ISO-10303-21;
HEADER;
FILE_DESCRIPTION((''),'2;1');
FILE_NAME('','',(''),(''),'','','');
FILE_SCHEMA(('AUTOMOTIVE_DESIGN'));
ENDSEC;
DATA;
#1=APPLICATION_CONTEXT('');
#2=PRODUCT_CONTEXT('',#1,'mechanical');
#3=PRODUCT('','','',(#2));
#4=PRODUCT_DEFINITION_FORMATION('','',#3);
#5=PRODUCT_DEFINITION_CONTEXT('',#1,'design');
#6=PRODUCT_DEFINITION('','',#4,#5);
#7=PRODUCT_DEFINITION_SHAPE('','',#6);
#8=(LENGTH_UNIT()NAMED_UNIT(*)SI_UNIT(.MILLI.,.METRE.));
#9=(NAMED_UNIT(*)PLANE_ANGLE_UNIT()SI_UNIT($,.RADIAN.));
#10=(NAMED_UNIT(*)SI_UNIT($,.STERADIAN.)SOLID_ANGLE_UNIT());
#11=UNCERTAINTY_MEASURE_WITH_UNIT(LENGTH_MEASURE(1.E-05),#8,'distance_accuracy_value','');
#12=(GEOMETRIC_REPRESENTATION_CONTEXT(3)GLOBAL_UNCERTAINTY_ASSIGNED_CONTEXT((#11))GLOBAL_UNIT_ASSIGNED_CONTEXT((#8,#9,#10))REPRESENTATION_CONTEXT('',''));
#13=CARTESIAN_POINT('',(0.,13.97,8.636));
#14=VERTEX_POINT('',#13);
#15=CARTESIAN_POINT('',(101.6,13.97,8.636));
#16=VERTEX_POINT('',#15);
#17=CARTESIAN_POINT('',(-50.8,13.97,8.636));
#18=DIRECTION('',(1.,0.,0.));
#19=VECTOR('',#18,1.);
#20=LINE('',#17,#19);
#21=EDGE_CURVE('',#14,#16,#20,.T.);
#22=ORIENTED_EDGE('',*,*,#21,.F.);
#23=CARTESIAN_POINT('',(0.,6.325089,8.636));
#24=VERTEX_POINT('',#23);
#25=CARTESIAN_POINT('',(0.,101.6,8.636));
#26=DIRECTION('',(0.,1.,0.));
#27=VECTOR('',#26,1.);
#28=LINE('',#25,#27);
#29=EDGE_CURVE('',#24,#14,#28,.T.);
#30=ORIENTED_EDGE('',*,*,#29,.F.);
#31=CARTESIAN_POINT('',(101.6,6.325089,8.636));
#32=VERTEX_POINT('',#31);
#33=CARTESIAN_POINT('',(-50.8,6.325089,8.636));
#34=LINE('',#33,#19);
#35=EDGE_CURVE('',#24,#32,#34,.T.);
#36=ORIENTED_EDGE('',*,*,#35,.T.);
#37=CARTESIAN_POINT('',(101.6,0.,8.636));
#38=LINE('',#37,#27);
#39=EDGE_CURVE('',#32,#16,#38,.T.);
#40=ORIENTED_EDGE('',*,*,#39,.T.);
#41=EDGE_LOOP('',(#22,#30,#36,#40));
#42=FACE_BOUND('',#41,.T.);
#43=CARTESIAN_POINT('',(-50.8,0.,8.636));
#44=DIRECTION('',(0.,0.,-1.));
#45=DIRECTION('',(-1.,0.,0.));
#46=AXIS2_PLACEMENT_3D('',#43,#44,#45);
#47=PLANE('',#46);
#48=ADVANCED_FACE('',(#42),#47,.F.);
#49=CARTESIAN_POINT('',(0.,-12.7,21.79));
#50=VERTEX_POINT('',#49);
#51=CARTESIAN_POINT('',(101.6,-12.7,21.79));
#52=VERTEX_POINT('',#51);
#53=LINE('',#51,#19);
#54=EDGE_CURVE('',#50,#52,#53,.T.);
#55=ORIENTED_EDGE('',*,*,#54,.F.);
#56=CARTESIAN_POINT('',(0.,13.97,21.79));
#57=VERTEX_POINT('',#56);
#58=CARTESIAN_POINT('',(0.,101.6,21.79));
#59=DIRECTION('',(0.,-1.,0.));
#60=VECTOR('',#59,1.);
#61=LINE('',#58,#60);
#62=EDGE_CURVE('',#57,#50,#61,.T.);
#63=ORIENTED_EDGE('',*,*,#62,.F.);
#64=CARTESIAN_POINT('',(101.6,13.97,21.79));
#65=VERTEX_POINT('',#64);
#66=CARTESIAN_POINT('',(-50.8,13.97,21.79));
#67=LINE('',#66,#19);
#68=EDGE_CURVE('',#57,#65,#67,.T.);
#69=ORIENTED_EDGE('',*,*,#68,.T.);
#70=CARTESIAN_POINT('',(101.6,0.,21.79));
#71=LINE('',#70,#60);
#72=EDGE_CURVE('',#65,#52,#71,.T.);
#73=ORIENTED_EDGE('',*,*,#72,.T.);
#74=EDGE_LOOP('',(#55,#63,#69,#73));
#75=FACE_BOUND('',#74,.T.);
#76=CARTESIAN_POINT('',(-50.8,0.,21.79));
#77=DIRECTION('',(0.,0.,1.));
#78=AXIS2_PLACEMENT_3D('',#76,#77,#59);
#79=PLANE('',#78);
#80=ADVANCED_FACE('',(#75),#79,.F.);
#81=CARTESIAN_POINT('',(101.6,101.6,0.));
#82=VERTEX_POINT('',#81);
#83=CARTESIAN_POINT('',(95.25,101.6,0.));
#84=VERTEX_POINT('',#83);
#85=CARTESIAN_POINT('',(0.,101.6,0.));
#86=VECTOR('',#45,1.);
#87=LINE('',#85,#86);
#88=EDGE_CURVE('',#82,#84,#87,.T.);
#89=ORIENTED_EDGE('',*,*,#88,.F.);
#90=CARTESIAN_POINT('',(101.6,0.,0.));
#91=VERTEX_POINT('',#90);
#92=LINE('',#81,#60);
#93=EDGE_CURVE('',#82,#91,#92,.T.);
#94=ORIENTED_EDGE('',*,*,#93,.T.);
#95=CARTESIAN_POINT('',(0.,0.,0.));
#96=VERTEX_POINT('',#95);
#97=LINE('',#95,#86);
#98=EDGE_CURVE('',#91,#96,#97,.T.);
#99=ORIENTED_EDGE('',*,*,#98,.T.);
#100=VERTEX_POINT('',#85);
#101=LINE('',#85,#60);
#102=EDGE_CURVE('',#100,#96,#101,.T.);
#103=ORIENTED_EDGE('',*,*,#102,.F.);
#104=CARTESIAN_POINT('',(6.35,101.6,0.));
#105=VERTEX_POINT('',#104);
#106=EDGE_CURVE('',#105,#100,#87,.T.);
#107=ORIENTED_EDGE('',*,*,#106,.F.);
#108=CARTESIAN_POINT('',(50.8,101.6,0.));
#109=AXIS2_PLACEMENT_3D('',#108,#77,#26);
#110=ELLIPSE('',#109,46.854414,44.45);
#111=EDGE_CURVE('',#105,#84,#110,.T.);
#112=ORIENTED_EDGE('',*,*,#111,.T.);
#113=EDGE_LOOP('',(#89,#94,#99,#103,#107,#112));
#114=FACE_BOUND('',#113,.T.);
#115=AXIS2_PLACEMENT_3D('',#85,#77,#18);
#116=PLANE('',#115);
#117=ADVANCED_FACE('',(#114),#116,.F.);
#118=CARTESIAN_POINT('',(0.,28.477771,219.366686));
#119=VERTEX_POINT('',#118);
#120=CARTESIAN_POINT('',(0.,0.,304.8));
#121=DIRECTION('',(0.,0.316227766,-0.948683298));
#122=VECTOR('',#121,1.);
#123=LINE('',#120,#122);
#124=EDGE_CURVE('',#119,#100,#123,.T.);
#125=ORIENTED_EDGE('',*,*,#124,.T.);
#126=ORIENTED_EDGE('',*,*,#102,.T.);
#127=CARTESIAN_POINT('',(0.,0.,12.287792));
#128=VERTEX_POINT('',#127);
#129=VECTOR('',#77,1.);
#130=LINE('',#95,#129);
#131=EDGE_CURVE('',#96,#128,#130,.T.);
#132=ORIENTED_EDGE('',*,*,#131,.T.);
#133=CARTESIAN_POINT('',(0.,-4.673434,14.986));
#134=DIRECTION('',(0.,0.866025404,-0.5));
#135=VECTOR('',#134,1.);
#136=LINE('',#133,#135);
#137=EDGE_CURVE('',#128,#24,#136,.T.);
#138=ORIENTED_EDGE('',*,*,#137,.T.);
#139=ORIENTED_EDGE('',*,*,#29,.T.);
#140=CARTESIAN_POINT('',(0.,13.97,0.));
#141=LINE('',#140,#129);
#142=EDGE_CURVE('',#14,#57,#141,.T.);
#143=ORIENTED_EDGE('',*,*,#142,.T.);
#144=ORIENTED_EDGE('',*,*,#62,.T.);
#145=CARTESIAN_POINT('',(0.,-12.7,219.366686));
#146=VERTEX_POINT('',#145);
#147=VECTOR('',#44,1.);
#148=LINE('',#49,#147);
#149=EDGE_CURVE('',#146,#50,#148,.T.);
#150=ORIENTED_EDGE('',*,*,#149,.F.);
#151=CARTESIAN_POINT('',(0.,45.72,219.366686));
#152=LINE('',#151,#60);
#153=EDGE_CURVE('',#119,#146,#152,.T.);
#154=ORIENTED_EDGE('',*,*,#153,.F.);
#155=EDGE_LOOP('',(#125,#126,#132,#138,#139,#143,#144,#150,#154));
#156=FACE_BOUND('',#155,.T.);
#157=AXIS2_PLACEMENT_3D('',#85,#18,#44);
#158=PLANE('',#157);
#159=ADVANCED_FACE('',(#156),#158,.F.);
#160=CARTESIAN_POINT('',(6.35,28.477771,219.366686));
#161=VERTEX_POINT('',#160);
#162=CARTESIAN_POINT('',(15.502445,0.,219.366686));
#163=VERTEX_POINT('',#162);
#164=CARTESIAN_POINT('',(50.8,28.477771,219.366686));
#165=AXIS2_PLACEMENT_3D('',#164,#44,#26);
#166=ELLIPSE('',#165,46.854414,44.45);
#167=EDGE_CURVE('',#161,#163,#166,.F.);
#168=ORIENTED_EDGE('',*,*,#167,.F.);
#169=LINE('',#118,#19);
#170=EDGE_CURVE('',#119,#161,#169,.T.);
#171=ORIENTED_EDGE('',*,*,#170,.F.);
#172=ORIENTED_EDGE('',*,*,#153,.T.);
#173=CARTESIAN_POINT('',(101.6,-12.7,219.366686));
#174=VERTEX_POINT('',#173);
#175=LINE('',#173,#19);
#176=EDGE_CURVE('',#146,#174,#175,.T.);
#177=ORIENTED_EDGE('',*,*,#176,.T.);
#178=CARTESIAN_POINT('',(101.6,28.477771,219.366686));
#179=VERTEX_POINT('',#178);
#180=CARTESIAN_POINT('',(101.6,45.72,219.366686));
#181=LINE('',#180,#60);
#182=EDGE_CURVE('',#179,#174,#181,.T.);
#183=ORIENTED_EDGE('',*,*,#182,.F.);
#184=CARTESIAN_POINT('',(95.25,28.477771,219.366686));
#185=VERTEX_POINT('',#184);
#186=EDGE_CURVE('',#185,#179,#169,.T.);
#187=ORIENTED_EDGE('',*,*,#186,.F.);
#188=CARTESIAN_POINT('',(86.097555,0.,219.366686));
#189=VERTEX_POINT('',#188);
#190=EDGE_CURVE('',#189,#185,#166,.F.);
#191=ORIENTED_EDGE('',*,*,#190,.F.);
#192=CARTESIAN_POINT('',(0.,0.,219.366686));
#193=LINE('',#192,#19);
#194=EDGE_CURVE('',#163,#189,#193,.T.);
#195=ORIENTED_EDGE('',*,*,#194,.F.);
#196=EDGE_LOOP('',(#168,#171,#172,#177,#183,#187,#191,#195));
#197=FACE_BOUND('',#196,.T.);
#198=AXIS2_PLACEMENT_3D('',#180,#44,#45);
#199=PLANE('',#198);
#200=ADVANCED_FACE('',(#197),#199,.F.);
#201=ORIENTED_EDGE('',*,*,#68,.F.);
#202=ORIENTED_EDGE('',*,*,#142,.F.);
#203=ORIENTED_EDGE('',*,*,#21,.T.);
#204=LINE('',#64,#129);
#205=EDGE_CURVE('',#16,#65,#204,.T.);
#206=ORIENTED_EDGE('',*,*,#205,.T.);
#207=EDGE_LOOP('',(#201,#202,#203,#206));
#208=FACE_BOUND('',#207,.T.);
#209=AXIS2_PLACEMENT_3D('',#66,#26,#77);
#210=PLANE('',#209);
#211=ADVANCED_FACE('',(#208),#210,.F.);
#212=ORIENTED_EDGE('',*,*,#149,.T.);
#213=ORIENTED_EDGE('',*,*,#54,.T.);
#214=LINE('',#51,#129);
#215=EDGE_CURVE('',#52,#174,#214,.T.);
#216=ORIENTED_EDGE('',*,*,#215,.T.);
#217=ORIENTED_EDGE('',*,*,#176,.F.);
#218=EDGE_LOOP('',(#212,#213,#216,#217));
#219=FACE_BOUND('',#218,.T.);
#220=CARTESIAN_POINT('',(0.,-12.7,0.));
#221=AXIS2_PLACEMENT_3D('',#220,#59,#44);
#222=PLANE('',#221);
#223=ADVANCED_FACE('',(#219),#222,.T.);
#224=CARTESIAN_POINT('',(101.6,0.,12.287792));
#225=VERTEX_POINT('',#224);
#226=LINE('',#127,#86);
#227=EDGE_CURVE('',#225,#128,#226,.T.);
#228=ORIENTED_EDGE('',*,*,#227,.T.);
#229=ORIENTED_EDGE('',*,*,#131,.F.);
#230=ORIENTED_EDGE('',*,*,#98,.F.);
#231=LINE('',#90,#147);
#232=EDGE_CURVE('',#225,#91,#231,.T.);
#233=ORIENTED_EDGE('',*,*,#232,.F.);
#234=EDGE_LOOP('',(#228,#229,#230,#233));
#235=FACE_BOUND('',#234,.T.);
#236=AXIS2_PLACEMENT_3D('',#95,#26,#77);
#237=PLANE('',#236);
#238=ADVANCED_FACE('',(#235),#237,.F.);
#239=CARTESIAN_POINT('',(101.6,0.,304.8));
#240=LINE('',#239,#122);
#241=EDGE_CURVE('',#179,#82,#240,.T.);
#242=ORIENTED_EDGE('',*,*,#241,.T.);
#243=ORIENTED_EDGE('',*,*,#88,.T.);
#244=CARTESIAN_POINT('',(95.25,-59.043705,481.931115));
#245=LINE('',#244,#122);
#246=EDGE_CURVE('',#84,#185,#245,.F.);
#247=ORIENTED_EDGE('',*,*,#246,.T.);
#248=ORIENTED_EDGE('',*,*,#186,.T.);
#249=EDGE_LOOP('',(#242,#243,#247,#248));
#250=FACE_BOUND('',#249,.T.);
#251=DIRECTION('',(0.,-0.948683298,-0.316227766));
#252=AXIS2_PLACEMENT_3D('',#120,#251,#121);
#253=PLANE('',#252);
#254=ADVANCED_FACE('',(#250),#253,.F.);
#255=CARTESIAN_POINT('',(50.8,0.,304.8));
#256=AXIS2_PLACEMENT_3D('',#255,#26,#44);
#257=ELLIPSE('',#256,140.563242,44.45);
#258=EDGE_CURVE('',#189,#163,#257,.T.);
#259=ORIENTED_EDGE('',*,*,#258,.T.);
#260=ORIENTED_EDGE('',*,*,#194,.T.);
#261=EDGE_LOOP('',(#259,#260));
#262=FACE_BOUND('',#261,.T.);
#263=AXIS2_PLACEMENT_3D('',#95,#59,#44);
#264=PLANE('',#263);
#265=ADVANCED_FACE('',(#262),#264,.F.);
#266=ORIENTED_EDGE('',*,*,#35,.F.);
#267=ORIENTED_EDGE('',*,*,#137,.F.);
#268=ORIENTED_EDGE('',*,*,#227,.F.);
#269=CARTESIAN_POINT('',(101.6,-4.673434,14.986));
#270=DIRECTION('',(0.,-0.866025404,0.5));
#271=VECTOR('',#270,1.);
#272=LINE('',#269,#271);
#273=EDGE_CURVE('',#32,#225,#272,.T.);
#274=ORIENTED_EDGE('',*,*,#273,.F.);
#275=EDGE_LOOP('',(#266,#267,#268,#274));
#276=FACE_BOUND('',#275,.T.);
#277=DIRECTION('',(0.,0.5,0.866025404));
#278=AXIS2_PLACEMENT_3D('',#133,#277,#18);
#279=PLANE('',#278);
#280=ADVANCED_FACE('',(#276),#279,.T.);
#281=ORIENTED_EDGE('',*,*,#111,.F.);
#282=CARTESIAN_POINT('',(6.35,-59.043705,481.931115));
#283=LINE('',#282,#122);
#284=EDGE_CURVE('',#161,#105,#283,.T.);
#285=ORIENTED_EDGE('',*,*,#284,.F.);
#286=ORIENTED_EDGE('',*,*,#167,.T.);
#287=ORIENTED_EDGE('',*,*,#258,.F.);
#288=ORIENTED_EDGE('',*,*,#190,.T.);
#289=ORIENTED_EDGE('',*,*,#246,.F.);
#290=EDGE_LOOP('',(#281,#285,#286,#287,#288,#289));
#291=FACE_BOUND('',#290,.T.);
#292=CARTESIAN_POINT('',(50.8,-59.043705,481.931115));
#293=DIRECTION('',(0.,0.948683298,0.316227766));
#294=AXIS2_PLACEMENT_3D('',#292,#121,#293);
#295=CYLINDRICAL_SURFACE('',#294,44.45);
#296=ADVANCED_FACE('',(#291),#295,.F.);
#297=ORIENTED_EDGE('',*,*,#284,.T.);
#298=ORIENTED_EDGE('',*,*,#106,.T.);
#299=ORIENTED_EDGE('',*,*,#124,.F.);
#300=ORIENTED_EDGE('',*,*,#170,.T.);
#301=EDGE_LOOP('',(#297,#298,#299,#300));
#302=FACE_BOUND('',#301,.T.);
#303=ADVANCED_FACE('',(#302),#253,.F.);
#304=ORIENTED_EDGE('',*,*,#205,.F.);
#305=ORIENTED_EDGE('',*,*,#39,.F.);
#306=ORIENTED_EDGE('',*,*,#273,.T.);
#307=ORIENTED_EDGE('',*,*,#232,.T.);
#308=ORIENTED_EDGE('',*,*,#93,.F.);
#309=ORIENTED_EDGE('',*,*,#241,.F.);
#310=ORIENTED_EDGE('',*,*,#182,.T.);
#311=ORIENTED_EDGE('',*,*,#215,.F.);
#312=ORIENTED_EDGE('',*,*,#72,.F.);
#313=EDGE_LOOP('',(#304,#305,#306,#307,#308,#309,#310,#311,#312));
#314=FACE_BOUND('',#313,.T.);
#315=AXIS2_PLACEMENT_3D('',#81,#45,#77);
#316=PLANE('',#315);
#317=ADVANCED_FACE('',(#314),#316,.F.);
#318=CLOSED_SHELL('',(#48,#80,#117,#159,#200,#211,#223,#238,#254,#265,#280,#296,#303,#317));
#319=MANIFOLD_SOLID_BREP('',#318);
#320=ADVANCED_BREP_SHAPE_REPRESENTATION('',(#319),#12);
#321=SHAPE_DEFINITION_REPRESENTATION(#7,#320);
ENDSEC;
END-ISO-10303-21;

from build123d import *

# Parameters (mm, degrees)
SKETCH1_W           = 101.6
SKETCH1_H           = 304.8
BOSS_EXTRUDE1_DEPTH = 101.6
CUT_EXTRUDE1_DEPTH  = 101.6
SKETCH4_R           = 44.45
CUT_EXTRUDE2_DEPTH  = 508
SKETCH7_W           = 13.154000108
SKETCH7_H           = 13.97
CUT_EXTRUDE3_DEPTH  = 152.4
SKETCH8_W           = 101.6
SKETCH8_H           = 6.985
BOSS_EXTRUDE2_DEPTH = 6.35
CHAMFER1_SIZE       = 6.731
CHAMFER1_SIZE_2     = 11.658433986
SKETCH9_W           = 101.6
SKETCH9_H           = 292.826685396
BOSS_EXTRUDE3_DEPTH = 12.7
SKETCH10_W          = 101.6
SKETCH10_H          = 95.25
CUT_EXTRUDE4_DEPTH  = 58.42


with BuildPart() as part:
    # Sketch1 → Boss-Extrude1 (new body)
    with BuildSketch(Plane(origin=(0, 0, 0), x_dir=(1, 0, 0), z_dir=(0, 1, 0))):
        with Locations((50.8, -152.4)):
            Rectangle(SKETCH1_W, SKETCH1_H)
    extrude(amount=BOSS_EXTRUDE1_DEPTH)

    # Sketch3 → Cut-Extrude1 (cut)
    with BuildSketch(Plane(origin=(101.6, 0, 0), x_dir=(0, 0, -1), z_dir=(1, 0, 0))):
        Polygon((-304.8, 0), (0, 101.6), (-304.8, 101.6), align=None)
    extrude(amount=-CUT_EXTRUDE1_DEPTH, mode=Mode.SUBTRACT)

    # Sketch4 → Cut-Extrude2 (cut)
    with BuildSketch(Plane(origin=(0, 10.16, -30.48), x_dir=(-1, 0, 0), z_dir=(0, 0.31622776601683794, -0.9486832980505139))):
        with Locations((-50.8, 96.386223082)):
            Circle(SKETCH4_R)
    extrude(amount=-CUT_EXTRUDE2_DEPTH, mode=Mode.SUBTRACT)

    # Sketch7 → Cut-Extrude3 (cut)
    with BuildSketch(Plane(origin=(101.6, 0, 0), x_dir=(0, 0, -1), z_dir=(1, 0, 0))):
        with Locations((-15.213000054, 6.985)):
            Rectangle(SKETCH7_W, SKETCH7_H)
    extrude(amount=-CUT_EXTRUDE3_DEPTH, mode=Mode.SUBTRACT)

    # Sketch8 → Boss-Extrude2 (add)
    with BuildSketch(Plane.XY.offset(8.636)):
        with Locations((50.8, 3.4925)):
            Rectangle(SKETCH8_W, SKETCH8_H)
    extrude(amount=BOSS_EXTRUDE2_DEPTH)

    # Chamfer1
    # the kernel refuses this chamfer: 11.658433986, 6.731 mm, written as the material it takes off along each edge
    with BuildSketch(Plane(origin=(-30.161368486, 6.985, 14.986), x_dir=(0, 0.057893862402671366, -0.9983227437537926), z_dir=(1, 0, 0))) as chamfer1_piece_1_section:
        Polygon((CHAMFER1_SIZE * 0.998322743754, -CHAMFER1_SIZE * 0.0578938624027), (-CHAMFER1_SIZE_2 * 0.0578938624014, -CHAMFER1_SIZE_2 * 0.998322743732), (0, 0), align=None)
    chamfer1_piece_1 = extrude(amount=161.922736972, mode=Mode.PRIVATE)
    chamfer1_piece_1 = split(chamfer1_piece_1, bisect_by=Plane(origin=(50.8, 3.03450116, 8.636), z_dir=(0, 0, 1)), keep=Keep.TOP, mode=Mode.PRIVATE)
    add(chamfer1_piece_1, mode=Mode.SUBTRACT)

    # Sketch9 → Boss-Extrude3 (add)
    with BuildSketch(Plane.XZ):
        with Locations((50.8, 168.203342806)):
            Rectangle(SKETCH9_W, SKETCH9_H)
    extrude(amount=BOSS_EXTRUDE3_DEPTH)

    # Sketch10 → Cut-Extrude4 (cut)
    with BuildSketch(Plane(origin=(0, -12.7, 0), x_dir=(-1, 0, 0), z_dir=(0, -1, 0))):
        with Locations((-50.8, -266.991685504)):
            Rectangle(SKETCH10_W, SKETCH10_H)
    extrude(amount=-CUT_EXTRUDE4_DEPTH, mode=Mode.SUBTRACT)


solid = part.part
